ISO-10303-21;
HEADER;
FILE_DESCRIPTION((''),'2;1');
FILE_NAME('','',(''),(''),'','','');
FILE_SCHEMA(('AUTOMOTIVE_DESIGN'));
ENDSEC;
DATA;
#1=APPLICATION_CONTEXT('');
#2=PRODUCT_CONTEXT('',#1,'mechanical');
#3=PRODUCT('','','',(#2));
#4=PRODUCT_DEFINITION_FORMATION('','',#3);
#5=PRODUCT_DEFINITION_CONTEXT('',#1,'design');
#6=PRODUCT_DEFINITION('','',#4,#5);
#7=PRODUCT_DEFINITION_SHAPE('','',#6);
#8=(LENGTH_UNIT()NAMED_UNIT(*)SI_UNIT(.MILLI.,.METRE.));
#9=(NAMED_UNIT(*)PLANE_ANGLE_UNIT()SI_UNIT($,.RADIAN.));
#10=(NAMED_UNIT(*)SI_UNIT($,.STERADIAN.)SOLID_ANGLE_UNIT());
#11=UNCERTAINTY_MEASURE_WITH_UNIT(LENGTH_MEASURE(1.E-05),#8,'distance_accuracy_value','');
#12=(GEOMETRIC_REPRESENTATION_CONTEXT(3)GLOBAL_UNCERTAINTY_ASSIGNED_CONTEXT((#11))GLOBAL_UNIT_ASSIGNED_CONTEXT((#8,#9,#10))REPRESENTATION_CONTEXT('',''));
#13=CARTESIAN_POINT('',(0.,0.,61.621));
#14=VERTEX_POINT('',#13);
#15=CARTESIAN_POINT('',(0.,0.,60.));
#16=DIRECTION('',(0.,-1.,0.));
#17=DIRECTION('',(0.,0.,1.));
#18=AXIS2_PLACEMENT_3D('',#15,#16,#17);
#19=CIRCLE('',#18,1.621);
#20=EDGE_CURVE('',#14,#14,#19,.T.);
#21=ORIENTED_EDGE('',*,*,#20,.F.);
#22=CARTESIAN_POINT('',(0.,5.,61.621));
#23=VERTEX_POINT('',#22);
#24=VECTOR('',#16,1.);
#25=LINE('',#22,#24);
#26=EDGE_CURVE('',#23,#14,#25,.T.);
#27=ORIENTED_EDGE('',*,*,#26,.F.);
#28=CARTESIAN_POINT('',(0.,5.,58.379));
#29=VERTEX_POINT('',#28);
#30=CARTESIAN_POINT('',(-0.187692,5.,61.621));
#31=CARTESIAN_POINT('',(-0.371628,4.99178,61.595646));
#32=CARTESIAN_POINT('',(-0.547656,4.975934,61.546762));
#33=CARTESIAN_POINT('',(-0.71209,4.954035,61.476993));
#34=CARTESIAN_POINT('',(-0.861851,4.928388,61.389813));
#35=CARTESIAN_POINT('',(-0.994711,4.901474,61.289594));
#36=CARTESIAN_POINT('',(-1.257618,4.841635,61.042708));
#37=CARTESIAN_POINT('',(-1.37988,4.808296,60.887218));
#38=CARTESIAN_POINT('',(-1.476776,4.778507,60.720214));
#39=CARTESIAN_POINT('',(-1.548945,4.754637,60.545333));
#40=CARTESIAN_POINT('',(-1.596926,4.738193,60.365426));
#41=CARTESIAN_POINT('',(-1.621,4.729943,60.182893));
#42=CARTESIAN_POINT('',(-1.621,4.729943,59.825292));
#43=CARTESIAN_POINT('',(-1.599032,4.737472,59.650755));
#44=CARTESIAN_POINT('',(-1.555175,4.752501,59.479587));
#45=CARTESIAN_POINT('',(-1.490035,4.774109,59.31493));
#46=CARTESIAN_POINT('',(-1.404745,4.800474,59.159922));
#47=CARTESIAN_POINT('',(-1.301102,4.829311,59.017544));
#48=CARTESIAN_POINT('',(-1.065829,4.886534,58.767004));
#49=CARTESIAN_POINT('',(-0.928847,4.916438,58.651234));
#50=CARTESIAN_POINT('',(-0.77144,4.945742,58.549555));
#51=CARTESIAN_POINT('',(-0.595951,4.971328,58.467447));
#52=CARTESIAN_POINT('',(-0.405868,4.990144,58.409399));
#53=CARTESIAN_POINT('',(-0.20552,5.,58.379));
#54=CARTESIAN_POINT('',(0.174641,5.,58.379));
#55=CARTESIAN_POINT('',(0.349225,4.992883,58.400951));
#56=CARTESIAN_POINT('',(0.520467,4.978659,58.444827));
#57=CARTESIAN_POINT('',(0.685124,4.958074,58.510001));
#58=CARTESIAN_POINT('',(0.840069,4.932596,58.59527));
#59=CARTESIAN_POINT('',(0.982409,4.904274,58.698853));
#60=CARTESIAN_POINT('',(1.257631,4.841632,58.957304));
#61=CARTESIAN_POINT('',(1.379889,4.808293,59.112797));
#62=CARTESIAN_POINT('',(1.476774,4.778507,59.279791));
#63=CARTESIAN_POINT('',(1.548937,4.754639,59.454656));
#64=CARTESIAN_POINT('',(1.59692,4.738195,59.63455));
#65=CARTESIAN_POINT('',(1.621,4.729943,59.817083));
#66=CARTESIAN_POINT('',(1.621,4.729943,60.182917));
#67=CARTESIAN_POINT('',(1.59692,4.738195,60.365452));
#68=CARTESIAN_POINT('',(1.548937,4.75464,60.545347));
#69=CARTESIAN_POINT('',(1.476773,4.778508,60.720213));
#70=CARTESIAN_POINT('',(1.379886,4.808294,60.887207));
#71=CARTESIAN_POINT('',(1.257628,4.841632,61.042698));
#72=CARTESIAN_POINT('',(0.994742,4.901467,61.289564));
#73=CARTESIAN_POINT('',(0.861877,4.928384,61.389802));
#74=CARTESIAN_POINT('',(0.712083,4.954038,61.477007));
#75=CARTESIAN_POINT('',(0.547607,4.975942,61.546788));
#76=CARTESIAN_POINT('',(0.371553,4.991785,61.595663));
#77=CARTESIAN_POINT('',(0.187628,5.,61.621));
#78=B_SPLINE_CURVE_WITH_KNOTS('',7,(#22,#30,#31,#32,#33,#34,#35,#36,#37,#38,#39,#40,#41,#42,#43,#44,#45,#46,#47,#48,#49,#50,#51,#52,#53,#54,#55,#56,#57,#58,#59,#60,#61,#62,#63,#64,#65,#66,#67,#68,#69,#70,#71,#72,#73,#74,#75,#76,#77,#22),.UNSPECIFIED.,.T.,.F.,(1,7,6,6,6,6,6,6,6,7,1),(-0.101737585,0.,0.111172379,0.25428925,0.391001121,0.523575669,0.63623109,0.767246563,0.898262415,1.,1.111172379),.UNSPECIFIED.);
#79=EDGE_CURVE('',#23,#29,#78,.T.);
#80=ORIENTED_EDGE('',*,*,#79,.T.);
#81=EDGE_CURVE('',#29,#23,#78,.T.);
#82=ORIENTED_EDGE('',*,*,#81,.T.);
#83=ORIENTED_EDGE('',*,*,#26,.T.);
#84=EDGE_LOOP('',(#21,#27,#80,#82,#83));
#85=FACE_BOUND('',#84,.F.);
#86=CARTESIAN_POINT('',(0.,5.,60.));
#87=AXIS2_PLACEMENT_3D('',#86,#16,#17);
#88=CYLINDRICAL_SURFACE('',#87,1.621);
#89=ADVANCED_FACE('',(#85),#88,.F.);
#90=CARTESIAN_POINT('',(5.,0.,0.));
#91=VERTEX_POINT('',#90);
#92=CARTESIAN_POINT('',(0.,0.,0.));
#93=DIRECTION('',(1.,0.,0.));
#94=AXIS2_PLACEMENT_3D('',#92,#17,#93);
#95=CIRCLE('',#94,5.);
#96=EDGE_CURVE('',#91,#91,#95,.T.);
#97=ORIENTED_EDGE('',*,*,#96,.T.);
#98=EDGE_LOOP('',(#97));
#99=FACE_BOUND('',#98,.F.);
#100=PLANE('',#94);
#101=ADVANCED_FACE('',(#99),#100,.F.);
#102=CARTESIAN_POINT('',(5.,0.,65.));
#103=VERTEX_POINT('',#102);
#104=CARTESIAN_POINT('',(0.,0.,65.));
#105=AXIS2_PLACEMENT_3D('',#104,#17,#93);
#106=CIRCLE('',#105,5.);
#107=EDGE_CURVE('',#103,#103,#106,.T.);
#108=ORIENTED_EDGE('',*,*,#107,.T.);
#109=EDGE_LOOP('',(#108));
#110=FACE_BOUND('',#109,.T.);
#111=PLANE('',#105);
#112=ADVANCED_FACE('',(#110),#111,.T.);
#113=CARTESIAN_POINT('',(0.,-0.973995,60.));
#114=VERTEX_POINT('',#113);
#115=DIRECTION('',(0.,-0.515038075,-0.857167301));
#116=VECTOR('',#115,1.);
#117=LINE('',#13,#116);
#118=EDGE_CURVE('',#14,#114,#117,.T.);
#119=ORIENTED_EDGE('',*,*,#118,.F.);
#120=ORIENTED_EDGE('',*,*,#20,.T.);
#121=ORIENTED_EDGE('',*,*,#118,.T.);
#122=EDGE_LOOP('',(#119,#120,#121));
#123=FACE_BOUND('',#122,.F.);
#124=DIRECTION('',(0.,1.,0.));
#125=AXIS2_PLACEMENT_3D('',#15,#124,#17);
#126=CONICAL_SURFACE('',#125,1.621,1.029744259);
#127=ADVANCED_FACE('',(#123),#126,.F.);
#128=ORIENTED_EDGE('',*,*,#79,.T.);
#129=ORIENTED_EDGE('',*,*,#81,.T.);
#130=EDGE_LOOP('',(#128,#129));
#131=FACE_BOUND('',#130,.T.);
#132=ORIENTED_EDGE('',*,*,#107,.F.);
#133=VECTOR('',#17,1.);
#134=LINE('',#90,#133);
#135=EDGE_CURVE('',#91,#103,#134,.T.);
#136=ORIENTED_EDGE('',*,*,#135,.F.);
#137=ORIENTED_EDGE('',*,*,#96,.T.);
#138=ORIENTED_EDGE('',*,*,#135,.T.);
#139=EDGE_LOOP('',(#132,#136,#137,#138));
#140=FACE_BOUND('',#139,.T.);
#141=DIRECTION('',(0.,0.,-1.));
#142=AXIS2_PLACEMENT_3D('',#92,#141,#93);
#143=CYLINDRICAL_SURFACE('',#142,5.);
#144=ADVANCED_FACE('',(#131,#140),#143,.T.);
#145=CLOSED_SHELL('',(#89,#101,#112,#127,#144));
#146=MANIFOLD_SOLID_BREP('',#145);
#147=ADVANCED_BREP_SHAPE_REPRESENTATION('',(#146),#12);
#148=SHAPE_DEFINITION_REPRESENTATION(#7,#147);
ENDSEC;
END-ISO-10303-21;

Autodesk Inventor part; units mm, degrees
ref_plane "YZ Plane" through (0, 0, 0) normal (1, 0, 0) x (0, 1, 0)
ref_plane "XY Plane" through (0, 0, 0) normal (0, 0, 1) x (1, 0, 0)
sketch "Sketch1" plane through (0, 0, 0) normal (0, 0, 1) x (1, 0, 0)
  circle A0 centre (0, 0) radius 5
  dimension "d0" = 10
extrude "Extrusion1" add sketch "Sketch1" along normal blind 65
ref_plane "Work Plane1" through (0, 5, 0) normal (0, 1, 0) x (-1, 0, 0)
sketch "Sketch3" plane through (0, 5, 0) normal (0, 1, 0) x (-1, 0, 0)
  line L0 (5, 65) -> (-5, 65) projected
  point P0 (0, 0)
  point P1 (0, 60)
  point P2 (0, 65)
  dimension "d8" = 5
hole "Hole1" at (0, 5, 60) direction (0, -1, 0) diameter 3.242 depth 5 tip angle 118 thread size "M4x0.7" class "6H" standard "ISO Metric profile"
sketch "Sketch2" plane through (0, 0, 65) normal (0, 0, 1) x (1, 0, 0)
  line L0 (-2, 12.2946) -> (2, 12.2946)
  line L1 (2, 12.2946) -> (2, 3)
  line L2 (2, 3) -> (-2, 3)
  line L3 (-2, 3) -> (-2, 12.2946)
  line L4 (-2, 12.2946) -> (2, 3) construction
  line L5 (2, 12.2946) -> (-2, 3) construction
  circle A0 centre (0, 0) radius 5 projected
  point P0 (0, 7.6473)
  point P1 (0, 5)
  dimension "d4" = 4
  dimension "d7" = 2
properties part number "GEARBOX_SHAFT3" material "Steel"
